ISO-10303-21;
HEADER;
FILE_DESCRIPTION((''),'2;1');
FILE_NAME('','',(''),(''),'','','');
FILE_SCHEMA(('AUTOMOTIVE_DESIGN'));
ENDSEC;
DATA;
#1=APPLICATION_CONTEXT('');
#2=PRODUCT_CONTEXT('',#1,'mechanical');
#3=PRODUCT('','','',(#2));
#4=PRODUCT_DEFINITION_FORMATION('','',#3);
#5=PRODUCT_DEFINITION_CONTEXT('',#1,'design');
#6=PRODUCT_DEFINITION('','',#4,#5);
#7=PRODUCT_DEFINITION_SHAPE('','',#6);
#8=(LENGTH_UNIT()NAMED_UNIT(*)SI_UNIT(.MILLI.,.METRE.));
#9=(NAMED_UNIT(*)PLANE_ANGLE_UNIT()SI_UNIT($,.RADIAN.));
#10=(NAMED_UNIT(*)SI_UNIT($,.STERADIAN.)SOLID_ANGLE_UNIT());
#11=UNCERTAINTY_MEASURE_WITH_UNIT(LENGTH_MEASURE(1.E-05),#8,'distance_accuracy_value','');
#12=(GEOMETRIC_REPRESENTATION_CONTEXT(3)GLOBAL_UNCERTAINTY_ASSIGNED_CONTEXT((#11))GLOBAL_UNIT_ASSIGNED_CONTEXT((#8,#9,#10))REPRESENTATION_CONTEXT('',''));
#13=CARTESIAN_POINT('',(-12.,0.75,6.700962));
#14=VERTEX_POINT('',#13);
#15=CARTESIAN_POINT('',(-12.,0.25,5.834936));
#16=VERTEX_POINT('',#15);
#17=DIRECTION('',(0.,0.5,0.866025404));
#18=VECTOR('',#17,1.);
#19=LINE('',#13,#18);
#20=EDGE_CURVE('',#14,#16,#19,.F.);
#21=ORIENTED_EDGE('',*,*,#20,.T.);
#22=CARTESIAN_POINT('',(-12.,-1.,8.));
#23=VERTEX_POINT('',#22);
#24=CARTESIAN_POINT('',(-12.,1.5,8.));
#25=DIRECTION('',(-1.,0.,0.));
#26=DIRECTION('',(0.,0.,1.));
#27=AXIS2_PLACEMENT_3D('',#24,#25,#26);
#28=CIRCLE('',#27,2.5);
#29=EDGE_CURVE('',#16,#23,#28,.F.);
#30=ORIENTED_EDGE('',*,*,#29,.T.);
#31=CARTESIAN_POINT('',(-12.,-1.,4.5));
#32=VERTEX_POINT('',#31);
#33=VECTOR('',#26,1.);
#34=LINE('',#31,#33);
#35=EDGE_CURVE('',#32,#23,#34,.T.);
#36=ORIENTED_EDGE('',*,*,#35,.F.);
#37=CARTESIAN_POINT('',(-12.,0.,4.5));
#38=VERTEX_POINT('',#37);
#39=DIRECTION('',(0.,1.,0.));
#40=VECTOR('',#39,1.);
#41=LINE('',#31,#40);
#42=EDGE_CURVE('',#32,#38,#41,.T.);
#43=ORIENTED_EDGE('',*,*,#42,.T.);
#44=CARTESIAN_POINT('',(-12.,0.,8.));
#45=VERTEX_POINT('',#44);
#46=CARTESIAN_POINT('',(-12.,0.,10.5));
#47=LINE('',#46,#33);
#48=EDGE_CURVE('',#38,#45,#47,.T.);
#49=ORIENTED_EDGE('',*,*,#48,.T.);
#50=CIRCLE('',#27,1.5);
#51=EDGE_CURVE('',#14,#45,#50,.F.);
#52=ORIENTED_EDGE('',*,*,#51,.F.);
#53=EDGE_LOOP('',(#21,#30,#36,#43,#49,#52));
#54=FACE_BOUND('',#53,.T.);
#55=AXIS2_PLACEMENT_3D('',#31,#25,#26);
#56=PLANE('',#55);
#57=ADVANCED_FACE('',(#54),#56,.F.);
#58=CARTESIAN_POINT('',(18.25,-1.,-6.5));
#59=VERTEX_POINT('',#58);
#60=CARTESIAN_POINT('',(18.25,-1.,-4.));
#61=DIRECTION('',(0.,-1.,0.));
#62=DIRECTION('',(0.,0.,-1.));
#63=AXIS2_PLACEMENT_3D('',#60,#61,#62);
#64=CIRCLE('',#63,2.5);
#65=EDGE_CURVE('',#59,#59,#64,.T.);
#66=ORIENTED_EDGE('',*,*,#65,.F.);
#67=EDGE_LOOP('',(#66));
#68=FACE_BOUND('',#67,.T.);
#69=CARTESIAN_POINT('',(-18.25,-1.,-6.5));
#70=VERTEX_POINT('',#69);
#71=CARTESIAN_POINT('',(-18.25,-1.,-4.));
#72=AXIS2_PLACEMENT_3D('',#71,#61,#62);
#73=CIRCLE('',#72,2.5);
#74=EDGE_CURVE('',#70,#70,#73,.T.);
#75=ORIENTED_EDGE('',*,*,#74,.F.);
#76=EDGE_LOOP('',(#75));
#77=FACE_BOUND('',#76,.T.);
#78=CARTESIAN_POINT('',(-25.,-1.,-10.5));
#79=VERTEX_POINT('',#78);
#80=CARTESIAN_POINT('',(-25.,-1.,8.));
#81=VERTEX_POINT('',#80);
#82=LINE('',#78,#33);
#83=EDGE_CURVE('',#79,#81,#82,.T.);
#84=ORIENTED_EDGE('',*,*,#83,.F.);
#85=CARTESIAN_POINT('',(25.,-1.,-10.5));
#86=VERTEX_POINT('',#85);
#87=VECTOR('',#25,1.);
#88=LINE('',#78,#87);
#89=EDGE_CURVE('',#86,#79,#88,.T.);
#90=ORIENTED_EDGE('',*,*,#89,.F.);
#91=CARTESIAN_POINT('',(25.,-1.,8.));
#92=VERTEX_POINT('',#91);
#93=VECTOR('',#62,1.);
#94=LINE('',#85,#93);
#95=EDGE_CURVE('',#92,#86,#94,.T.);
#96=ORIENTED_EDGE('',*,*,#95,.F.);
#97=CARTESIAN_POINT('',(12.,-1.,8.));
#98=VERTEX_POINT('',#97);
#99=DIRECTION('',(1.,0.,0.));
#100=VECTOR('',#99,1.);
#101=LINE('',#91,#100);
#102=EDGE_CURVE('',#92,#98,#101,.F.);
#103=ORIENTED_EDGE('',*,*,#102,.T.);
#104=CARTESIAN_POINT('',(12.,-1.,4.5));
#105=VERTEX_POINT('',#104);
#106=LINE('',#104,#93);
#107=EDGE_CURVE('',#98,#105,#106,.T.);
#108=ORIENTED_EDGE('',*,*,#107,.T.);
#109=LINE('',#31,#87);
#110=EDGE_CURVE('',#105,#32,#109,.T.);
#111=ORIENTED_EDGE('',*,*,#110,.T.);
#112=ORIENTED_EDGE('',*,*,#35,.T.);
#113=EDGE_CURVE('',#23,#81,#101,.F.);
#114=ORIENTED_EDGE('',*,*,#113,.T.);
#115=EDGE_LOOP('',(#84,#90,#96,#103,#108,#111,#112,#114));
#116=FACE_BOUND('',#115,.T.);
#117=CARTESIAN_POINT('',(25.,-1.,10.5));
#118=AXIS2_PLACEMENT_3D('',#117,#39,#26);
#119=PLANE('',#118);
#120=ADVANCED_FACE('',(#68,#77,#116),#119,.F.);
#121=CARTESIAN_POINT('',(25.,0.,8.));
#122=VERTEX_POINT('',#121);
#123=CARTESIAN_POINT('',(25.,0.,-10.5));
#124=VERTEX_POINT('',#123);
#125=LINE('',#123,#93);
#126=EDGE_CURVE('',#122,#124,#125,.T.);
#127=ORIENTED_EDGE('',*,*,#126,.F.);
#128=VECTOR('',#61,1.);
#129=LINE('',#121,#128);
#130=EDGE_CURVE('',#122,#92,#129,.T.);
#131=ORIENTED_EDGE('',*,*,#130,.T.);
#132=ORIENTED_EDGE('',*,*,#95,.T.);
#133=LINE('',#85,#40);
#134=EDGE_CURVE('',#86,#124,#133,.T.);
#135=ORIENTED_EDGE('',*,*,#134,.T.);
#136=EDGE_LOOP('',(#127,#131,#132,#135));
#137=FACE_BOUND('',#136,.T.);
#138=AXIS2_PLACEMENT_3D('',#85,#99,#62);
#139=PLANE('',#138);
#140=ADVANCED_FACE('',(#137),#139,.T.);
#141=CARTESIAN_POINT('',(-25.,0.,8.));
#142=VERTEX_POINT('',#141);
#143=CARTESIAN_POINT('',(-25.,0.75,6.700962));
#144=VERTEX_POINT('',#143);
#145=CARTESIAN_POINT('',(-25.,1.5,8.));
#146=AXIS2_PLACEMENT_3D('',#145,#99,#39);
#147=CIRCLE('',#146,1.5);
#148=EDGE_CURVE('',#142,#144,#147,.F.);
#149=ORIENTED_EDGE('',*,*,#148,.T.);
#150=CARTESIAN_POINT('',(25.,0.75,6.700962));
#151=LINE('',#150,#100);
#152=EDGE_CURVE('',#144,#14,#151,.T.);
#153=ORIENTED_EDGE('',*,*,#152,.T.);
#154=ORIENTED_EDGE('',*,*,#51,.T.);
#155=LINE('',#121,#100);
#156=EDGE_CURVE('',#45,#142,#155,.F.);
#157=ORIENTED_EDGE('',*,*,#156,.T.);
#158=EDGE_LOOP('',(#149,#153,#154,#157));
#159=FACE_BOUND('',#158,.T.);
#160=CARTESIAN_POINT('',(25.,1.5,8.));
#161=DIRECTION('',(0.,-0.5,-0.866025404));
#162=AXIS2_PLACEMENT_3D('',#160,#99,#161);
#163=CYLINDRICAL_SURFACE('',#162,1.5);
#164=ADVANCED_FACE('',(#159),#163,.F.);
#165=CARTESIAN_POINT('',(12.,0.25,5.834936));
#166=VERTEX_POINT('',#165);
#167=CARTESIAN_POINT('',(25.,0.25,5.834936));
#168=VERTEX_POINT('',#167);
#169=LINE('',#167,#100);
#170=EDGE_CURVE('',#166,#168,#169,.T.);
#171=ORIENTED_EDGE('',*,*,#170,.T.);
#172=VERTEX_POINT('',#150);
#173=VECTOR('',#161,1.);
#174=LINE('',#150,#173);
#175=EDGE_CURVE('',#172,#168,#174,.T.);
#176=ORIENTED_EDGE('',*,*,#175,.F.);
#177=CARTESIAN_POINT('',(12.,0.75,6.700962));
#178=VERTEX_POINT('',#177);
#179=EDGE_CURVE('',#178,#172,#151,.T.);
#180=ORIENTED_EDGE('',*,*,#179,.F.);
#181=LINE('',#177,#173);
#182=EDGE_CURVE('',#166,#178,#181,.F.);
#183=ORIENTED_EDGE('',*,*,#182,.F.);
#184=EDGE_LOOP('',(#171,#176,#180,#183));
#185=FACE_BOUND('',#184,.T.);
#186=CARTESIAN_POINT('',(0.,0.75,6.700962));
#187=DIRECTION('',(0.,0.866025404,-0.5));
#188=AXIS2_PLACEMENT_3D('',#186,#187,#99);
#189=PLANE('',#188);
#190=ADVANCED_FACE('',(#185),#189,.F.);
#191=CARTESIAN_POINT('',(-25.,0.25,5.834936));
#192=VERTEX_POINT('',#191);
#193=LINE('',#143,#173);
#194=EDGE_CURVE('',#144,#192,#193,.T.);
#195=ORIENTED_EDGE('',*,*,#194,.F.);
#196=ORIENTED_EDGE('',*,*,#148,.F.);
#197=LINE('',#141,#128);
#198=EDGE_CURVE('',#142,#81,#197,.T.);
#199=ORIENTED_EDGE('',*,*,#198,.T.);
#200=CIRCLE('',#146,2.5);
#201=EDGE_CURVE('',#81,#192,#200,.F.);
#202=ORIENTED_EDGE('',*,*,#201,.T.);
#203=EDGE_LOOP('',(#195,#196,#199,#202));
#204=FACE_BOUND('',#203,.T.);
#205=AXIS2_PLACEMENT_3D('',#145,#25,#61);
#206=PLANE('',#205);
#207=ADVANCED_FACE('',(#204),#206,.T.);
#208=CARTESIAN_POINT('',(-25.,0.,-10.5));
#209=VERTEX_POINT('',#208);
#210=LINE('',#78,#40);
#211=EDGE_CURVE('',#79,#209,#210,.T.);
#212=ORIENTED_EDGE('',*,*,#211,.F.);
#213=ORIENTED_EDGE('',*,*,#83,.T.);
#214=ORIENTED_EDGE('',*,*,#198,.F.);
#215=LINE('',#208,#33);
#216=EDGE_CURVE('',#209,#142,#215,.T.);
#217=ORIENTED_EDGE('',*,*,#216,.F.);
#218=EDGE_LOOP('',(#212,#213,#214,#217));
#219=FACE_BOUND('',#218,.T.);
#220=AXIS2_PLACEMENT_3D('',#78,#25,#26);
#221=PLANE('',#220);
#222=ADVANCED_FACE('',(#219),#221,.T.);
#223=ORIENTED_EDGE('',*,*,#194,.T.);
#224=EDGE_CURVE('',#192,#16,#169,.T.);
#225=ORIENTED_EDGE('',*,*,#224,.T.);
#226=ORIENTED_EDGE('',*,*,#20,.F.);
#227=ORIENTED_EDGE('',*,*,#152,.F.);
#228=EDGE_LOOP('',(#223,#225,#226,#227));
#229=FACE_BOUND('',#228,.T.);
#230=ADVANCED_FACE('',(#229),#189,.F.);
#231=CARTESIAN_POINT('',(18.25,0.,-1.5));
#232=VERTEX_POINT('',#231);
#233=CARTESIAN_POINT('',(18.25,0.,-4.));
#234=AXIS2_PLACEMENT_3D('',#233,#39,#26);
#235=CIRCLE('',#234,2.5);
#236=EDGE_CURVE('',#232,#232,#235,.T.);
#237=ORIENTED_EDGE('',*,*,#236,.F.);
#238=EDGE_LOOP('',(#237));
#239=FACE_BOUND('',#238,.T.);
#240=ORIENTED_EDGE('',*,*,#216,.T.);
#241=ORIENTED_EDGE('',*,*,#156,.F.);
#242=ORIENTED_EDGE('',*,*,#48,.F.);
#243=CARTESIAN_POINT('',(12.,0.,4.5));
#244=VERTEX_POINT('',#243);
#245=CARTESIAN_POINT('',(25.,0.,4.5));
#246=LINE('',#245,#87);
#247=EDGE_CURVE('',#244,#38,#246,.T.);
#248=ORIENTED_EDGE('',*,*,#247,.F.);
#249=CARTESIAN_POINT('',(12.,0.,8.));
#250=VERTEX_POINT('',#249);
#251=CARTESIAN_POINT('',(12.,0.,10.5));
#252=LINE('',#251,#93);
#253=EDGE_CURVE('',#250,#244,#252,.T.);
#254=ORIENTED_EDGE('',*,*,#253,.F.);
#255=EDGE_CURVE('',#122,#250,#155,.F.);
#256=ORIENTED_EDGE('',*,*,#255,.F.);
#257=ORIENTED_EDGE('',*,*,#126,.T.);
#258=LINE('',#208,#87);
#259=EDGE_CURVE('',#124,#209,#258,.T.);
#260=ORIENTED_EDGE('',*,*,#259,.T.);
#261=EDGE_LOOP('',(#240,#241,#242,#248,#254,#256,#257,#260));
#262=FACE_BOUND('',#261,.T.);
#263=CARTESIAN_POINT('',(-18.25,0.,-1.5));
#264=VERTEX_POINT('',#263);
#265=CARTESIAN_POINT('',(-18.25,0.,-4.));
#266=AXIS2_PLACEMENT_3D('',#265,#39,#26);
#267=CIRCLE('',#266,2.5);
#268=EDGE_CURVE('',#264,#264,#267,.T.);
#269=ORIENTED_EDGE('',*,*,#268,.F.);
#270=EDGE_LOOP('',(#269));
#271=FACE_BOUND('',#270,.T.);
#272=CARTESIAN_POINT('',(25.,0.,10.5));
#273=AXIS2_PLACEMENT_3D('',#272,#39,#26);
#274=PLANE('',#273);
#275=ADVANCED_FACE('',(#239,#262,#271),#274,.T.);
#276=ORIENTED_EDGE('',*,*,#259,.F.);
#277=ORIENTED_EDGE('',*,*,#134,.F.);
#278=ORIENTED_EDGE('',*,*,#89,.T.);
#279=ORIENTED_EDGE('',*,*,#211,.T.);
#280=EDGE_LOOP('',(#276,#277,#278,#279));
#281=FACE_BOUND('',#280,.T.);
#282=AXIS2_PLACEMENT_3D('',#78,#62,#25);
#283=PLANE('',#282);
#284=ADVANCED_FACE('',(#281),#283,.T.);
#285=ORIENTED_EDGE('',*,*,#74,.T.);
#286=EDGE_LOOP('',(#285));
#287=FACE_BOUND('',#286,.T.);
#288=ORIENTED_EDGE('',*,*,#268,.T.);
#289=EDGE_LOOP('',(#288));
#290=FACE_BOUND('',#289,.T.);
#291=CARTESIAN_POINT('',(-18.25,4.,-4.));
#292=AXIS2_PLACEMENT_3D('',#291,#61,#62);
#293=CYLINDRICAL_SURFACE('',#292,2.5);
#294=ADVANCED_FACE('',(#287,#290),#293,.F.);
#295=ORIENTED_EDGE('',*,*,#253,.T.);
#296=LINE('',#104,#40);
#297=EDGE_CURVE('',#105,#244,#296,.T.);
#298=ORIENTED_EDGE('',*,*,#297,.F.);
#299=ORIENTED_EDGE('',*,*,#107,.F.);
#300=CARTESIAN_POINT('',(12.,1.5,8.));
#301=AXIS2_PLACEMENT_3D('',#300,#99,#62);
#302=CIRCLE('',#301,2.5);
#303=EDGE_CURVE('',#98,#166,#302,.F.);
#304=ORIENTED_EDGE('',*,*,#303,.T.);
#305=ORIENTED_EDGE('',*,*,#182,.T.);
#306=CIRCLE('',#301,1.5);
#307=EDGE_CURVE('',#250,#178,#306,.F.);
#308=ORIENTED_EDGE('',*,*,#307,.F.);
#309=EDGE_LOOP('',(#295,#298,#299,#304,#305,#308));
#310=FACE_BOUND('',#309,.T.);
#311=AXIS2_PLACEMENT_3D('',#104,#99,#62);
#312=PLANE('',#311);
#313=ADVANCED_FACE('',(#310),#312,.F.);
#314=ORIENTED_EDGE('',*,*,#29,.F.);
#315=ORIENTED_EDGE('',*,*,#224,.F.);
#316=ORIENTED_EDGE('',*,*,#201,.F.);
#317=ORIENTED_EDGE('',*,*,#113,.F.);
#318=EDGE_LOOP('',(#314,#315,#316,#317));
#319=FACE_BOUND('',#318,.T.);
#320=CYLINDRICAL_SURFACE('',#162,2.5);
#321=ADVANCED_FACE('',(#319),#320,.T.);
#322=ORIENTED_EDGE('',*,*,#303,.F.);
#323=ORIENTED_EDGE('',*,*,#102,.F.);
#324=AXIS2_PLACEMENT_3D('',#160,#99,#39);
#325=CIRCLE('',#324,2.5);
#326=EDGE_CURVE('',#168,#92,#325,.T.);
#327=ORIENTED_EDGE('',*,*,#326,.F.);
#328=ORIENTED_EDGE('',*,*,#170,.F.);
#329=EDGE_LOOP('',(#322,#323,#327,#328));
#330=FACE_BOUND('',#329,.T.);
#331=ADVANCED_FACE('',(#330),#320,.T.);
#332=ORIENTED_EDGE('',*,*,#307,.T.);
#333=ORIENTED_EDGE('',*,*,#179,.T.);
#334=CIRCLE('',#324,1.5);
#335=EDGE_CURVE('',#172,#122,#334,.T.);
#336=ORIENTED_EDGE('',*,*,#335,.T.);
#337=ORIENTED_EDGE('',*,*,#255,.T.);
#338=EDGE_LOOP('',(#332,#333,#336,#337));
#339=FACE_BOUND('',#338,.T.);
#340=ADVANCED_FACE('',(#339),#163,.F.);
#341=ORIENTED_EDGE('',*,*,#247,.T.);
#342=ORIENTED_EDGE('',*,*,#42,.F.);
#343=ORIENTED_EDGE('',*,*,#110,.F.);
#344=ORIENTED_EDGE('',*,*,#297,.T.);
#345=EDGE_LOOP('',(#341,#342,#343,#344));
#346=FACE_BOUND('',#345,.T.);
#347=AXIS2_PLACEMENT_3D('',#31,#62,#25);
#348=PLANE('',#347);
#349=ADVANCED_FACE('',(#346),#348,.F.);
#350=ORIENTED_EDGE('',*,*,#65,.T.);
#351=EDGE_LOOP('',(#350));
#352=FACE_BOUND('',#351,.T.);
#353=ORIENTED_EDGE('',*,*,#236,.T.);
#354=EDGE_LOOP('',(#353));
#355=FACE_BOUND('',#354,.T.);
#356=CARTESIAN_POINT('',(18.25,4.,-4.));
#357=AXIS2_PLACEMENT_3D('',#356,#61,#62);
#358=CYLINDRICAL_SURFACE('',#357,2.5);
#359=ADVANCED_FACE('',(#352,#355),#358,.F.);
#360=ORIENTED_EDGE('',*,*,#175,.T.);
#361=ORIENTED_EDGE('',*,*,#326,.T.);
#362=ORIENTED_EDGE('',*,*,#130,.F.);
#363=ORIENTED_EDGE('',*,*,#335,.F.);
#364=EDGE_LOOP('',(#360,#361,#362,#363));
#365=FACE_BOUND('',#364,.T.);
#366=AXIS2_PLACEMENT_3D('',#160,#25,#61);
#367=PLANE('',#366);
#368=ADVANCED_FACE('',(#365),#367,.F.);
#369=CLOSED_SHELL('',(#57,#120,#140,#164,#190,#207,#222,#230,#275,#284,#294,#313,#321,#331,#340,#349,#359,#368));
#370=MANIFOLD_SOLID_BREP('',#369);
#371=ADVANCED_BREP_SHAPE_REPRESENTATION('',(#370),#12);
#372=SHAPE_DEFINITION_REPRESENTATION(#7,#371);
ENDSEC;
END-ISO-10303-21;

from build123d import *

# Parameters (mm, degrees)
SKETCH2_W               = 50
SKETCH2_H               = 21
BASE_FLANGE1_DEPTH      = 1
HEM1_START              = -25
HEM1_DEPTH              = 50
HEM1_2_DEPTH            = 50
CUT_EXTRUDE1_DEPTH      = 28.408940147
CUT_EXTRUDE1_DEPTH_BACK = 28.408940147
SKETCH5_W               = 24
SKETCH5_H               = 6
SKETCH6_R               = 2.5
CUT_EXTRUDE2_DEPTH      = 28.572631358


# Read off the part's stored shape, not the designer's step: Hem1
# Sheet-metal steps are written as plain solids
with BuildPart() as part:
    # Sketch2 → Base-Flange1 (new body)
    with BuildSketch(Plane(origin=(0, 0, 0), x_dir=(1, 0, 0), z_dir=(0, 1, 0))):
        Rectangle(SKETCH2_W, SKETCH2_H)
    extrude(amount=-BASE_FLANGE1_DEPTH)

    # Hem1 outline → Hem1 (cut)
    with BuildSketch(Plane.YZ.offset(HEM1_START)):
        with BuildLine():
            ThreePointArc((-1, 8), (-0.736067978, 9.118033989), (0, 10))
            Line((0, 10), (0, 10.5))
            Line((0, 10.5), (-1, 10.5))
            Line((-1, 10.5), (-1, 8))
        make_face()
    extrude(amount=HEM1_DEPTH, mode=Mode.SUBTRACT)

    # Hem1 2 outline → Hem1 2 (add)
    with BuildSketch(Plane.YZ.offset(HEM1_START)):
        with BuildLine():
            Line((0.75, 6.700961894), (0.25, 5.834936491))
            ThreePointArc((0.25, 5.834936491), (3.995508667, 8.149788152), (0, 10))
            Line((0, 10), (0, 8))
            ThreePointArc((0, 8), (2.799038106, 8.75), (0.75, 6.700961894))
        make_face()
    extrude(amount=HEM1_2_DEPTH)

    # Sketch5 → Cut-Extrude1 (cut, two sides: drawn at the far end of the back side and taken through both)
    with BuildSketch(Plane(origin=(0, 0, 0), x_dir=(1, 0, 0), z_dir=(0, 1, 0)).offset(-CUT_EXTRUDE1_DEPTH_BACK)):
        with Locations((0, -7.5)):
            Rectangle(SKETCH5_W, SKETCH5_H)
    extrude(amount=CUT_EXTRUDE1_DEPTH + CUT_EXTRUDE1_DEPTH_BACK, mode=Mode.SUBTRACT)

    # Sketch6 → Cut-Extrude2 (cut, through all)
    with BuildSketch(Plane.XZ.offset(1)):
        with Locations(Location((18.25, -4, 0), (0, 0, 270))):
            Circle(SKETCH6_R)
        with Locations(Location((-18.25, -4, 0), (0, 0, 270))):
            Circle(SKETCH6_R)
    extrude(amount=-CUT_EXTRUDE2_DEPTH, mode=Mode.SUBTRACT)


solid = part.part
